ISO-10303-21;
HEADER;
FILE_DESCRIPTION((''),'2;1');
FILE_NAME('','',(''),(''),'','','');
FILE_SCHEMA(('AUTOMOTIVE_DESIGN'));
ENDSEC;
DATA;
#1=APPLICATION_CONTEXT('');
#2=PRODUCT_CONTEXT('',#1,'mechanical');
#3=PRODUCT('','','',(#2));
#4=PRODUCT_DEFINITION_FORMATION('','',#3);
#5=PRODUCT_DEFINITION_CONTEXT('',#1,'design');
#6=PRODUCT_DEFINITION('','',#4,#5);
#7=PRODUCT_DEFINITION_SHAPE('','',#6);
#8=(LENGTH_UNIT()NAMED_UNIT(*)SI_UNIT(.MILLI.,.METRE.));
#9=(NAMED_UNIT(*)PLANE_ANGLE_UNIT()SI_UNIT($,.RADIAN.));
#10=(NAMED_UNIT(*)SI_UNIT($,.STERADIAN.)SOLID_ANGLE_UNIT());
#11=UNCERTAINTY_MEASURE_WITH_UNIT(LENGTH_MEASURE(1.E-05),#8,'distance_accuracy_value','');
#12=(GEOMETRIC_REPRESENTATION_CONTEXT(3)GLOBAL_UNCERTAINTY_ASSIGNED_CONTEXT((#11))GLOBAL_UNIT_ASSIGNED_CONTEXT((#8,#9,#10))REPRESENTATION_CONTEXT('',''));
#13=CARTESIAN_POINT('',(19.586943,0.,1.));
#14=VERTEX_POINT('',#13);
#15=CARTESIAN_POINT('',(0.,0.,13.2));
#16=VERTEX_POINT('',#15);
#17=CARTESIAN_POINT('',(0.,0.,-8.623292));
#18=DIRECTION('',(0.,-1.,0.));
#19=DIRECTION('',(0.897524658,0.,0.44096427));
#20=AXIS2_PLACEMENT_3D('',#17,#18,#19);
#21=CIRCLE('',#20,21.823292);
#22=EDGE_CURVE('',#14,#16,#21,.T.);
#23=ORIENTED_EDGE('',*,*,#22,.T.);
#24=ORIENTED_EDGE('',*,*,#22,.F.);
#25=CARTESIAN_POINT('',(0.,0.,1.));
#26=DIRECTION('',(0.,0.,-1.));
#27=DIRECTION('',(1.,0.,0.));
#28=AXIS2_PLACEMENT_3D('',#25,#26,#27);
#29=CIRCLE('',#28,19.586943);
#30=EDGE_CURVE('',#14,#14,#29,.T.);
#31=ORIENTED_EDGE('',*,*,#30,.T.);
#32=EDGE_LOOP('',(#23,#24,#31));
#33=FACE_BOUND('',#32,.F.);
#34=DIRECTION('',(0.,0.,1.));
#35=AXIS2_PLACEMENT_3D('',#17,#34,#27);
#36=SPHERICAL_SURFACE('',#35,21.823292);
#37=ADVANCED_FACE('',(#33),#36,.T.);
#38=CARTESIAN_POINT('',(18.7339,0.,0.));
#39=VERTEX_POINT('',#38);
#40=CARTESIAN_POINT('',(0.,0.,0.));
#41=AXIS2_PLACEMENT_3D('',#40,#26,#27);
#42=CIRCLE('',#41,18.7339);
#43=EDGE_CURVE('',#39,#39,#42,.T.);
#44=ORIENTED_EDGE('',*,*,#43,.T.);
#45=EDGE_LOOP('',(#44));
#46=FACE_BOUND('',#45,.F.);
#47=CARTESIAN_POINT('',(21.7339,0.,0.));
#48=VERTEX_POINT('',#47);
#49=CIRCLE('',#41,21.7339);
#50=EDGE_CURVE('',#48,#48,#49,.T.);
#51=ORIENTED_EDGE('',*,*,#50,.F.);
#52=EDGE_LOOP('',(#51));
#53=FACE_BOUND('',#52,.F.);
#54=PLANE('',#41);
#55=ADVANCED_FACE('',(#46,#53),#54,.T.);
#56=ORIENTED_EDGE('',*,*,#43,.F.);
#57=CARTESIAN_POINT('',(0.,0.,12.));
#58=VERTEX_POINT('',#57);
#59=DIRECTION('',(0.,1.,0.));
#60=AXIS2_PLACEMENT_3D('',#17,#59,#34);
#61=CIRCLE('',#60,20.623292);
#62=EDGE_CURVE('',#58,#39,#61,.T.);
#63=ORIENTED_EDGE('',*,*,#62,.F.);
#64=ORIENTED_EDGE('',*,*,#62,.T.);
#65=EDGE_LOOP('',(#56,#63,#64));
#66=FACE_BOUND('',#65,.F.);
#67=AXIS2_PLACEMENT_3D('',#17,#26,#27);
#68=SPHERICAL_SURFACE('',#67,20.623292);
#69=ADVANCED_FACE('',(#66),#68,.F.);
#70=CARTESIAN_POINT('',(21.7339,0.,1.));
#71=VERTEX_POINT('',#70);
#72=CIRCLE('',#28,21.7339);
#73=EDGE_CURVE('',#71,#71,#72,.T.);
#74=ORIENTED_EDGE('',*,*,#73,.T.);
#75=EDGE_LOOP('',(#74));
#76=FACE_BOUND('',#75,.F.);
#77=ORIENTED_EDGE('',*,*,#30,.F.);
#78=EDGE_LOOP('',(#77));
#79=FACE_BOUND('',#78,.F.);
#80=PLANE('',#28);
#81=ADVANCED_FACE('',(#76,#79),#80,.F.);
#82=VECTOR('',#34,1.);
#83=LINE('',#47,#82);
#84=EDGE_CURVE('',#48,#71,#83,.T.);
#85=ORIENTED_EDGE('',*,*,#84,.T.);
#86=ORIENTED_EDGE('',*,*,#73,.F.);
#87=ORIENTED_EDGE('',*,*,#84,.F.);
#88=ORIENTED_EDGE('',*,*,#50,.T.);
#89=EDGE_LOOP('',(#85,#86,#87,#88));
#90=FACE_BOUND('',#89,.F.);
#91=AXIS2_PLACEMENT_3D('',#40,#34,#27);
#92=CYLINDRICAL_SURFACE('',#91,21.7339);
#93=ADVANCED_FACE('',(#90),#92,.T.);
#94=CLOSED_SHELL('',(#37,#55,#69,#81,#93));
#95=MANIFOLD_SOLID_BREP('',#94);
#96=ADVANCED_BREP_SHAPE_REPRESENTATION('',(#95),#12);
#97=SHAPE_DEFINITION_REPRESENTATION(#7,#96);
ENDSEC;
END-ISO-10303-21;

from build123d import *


# Not quite as in the source:
# - a feature of the source that left no trace in its solid (it failed there, or was rolled back) is left out


with BuildPart() as f1:
    # F0 (on Front) → F1 (revolve)
    with BuildSketch(Plane.XZ):
        with BuildLine():
            ThreePointArc((0, 12), (11.1238371214, 8.7427789702), (18.7339, 0))
            Line((18.7339, 0), (21.7339, 0))
            Line((21.7339, 0), (21.7339, 1))
            Line((21.7339, 1), (19.7339, 1))
            Line((19.7339, 1), (19.5869427433, 1))
            ThreePointArc((19.5869427433, 1), (11.5378542852, 9.9005842829), (0, 13.2))
            Line((0, 13.2), (0, 12))
        make_face()
    revolve(axis=Axis((0, 0, 12.6), (0, 0, -1)))


solid = f1.part
